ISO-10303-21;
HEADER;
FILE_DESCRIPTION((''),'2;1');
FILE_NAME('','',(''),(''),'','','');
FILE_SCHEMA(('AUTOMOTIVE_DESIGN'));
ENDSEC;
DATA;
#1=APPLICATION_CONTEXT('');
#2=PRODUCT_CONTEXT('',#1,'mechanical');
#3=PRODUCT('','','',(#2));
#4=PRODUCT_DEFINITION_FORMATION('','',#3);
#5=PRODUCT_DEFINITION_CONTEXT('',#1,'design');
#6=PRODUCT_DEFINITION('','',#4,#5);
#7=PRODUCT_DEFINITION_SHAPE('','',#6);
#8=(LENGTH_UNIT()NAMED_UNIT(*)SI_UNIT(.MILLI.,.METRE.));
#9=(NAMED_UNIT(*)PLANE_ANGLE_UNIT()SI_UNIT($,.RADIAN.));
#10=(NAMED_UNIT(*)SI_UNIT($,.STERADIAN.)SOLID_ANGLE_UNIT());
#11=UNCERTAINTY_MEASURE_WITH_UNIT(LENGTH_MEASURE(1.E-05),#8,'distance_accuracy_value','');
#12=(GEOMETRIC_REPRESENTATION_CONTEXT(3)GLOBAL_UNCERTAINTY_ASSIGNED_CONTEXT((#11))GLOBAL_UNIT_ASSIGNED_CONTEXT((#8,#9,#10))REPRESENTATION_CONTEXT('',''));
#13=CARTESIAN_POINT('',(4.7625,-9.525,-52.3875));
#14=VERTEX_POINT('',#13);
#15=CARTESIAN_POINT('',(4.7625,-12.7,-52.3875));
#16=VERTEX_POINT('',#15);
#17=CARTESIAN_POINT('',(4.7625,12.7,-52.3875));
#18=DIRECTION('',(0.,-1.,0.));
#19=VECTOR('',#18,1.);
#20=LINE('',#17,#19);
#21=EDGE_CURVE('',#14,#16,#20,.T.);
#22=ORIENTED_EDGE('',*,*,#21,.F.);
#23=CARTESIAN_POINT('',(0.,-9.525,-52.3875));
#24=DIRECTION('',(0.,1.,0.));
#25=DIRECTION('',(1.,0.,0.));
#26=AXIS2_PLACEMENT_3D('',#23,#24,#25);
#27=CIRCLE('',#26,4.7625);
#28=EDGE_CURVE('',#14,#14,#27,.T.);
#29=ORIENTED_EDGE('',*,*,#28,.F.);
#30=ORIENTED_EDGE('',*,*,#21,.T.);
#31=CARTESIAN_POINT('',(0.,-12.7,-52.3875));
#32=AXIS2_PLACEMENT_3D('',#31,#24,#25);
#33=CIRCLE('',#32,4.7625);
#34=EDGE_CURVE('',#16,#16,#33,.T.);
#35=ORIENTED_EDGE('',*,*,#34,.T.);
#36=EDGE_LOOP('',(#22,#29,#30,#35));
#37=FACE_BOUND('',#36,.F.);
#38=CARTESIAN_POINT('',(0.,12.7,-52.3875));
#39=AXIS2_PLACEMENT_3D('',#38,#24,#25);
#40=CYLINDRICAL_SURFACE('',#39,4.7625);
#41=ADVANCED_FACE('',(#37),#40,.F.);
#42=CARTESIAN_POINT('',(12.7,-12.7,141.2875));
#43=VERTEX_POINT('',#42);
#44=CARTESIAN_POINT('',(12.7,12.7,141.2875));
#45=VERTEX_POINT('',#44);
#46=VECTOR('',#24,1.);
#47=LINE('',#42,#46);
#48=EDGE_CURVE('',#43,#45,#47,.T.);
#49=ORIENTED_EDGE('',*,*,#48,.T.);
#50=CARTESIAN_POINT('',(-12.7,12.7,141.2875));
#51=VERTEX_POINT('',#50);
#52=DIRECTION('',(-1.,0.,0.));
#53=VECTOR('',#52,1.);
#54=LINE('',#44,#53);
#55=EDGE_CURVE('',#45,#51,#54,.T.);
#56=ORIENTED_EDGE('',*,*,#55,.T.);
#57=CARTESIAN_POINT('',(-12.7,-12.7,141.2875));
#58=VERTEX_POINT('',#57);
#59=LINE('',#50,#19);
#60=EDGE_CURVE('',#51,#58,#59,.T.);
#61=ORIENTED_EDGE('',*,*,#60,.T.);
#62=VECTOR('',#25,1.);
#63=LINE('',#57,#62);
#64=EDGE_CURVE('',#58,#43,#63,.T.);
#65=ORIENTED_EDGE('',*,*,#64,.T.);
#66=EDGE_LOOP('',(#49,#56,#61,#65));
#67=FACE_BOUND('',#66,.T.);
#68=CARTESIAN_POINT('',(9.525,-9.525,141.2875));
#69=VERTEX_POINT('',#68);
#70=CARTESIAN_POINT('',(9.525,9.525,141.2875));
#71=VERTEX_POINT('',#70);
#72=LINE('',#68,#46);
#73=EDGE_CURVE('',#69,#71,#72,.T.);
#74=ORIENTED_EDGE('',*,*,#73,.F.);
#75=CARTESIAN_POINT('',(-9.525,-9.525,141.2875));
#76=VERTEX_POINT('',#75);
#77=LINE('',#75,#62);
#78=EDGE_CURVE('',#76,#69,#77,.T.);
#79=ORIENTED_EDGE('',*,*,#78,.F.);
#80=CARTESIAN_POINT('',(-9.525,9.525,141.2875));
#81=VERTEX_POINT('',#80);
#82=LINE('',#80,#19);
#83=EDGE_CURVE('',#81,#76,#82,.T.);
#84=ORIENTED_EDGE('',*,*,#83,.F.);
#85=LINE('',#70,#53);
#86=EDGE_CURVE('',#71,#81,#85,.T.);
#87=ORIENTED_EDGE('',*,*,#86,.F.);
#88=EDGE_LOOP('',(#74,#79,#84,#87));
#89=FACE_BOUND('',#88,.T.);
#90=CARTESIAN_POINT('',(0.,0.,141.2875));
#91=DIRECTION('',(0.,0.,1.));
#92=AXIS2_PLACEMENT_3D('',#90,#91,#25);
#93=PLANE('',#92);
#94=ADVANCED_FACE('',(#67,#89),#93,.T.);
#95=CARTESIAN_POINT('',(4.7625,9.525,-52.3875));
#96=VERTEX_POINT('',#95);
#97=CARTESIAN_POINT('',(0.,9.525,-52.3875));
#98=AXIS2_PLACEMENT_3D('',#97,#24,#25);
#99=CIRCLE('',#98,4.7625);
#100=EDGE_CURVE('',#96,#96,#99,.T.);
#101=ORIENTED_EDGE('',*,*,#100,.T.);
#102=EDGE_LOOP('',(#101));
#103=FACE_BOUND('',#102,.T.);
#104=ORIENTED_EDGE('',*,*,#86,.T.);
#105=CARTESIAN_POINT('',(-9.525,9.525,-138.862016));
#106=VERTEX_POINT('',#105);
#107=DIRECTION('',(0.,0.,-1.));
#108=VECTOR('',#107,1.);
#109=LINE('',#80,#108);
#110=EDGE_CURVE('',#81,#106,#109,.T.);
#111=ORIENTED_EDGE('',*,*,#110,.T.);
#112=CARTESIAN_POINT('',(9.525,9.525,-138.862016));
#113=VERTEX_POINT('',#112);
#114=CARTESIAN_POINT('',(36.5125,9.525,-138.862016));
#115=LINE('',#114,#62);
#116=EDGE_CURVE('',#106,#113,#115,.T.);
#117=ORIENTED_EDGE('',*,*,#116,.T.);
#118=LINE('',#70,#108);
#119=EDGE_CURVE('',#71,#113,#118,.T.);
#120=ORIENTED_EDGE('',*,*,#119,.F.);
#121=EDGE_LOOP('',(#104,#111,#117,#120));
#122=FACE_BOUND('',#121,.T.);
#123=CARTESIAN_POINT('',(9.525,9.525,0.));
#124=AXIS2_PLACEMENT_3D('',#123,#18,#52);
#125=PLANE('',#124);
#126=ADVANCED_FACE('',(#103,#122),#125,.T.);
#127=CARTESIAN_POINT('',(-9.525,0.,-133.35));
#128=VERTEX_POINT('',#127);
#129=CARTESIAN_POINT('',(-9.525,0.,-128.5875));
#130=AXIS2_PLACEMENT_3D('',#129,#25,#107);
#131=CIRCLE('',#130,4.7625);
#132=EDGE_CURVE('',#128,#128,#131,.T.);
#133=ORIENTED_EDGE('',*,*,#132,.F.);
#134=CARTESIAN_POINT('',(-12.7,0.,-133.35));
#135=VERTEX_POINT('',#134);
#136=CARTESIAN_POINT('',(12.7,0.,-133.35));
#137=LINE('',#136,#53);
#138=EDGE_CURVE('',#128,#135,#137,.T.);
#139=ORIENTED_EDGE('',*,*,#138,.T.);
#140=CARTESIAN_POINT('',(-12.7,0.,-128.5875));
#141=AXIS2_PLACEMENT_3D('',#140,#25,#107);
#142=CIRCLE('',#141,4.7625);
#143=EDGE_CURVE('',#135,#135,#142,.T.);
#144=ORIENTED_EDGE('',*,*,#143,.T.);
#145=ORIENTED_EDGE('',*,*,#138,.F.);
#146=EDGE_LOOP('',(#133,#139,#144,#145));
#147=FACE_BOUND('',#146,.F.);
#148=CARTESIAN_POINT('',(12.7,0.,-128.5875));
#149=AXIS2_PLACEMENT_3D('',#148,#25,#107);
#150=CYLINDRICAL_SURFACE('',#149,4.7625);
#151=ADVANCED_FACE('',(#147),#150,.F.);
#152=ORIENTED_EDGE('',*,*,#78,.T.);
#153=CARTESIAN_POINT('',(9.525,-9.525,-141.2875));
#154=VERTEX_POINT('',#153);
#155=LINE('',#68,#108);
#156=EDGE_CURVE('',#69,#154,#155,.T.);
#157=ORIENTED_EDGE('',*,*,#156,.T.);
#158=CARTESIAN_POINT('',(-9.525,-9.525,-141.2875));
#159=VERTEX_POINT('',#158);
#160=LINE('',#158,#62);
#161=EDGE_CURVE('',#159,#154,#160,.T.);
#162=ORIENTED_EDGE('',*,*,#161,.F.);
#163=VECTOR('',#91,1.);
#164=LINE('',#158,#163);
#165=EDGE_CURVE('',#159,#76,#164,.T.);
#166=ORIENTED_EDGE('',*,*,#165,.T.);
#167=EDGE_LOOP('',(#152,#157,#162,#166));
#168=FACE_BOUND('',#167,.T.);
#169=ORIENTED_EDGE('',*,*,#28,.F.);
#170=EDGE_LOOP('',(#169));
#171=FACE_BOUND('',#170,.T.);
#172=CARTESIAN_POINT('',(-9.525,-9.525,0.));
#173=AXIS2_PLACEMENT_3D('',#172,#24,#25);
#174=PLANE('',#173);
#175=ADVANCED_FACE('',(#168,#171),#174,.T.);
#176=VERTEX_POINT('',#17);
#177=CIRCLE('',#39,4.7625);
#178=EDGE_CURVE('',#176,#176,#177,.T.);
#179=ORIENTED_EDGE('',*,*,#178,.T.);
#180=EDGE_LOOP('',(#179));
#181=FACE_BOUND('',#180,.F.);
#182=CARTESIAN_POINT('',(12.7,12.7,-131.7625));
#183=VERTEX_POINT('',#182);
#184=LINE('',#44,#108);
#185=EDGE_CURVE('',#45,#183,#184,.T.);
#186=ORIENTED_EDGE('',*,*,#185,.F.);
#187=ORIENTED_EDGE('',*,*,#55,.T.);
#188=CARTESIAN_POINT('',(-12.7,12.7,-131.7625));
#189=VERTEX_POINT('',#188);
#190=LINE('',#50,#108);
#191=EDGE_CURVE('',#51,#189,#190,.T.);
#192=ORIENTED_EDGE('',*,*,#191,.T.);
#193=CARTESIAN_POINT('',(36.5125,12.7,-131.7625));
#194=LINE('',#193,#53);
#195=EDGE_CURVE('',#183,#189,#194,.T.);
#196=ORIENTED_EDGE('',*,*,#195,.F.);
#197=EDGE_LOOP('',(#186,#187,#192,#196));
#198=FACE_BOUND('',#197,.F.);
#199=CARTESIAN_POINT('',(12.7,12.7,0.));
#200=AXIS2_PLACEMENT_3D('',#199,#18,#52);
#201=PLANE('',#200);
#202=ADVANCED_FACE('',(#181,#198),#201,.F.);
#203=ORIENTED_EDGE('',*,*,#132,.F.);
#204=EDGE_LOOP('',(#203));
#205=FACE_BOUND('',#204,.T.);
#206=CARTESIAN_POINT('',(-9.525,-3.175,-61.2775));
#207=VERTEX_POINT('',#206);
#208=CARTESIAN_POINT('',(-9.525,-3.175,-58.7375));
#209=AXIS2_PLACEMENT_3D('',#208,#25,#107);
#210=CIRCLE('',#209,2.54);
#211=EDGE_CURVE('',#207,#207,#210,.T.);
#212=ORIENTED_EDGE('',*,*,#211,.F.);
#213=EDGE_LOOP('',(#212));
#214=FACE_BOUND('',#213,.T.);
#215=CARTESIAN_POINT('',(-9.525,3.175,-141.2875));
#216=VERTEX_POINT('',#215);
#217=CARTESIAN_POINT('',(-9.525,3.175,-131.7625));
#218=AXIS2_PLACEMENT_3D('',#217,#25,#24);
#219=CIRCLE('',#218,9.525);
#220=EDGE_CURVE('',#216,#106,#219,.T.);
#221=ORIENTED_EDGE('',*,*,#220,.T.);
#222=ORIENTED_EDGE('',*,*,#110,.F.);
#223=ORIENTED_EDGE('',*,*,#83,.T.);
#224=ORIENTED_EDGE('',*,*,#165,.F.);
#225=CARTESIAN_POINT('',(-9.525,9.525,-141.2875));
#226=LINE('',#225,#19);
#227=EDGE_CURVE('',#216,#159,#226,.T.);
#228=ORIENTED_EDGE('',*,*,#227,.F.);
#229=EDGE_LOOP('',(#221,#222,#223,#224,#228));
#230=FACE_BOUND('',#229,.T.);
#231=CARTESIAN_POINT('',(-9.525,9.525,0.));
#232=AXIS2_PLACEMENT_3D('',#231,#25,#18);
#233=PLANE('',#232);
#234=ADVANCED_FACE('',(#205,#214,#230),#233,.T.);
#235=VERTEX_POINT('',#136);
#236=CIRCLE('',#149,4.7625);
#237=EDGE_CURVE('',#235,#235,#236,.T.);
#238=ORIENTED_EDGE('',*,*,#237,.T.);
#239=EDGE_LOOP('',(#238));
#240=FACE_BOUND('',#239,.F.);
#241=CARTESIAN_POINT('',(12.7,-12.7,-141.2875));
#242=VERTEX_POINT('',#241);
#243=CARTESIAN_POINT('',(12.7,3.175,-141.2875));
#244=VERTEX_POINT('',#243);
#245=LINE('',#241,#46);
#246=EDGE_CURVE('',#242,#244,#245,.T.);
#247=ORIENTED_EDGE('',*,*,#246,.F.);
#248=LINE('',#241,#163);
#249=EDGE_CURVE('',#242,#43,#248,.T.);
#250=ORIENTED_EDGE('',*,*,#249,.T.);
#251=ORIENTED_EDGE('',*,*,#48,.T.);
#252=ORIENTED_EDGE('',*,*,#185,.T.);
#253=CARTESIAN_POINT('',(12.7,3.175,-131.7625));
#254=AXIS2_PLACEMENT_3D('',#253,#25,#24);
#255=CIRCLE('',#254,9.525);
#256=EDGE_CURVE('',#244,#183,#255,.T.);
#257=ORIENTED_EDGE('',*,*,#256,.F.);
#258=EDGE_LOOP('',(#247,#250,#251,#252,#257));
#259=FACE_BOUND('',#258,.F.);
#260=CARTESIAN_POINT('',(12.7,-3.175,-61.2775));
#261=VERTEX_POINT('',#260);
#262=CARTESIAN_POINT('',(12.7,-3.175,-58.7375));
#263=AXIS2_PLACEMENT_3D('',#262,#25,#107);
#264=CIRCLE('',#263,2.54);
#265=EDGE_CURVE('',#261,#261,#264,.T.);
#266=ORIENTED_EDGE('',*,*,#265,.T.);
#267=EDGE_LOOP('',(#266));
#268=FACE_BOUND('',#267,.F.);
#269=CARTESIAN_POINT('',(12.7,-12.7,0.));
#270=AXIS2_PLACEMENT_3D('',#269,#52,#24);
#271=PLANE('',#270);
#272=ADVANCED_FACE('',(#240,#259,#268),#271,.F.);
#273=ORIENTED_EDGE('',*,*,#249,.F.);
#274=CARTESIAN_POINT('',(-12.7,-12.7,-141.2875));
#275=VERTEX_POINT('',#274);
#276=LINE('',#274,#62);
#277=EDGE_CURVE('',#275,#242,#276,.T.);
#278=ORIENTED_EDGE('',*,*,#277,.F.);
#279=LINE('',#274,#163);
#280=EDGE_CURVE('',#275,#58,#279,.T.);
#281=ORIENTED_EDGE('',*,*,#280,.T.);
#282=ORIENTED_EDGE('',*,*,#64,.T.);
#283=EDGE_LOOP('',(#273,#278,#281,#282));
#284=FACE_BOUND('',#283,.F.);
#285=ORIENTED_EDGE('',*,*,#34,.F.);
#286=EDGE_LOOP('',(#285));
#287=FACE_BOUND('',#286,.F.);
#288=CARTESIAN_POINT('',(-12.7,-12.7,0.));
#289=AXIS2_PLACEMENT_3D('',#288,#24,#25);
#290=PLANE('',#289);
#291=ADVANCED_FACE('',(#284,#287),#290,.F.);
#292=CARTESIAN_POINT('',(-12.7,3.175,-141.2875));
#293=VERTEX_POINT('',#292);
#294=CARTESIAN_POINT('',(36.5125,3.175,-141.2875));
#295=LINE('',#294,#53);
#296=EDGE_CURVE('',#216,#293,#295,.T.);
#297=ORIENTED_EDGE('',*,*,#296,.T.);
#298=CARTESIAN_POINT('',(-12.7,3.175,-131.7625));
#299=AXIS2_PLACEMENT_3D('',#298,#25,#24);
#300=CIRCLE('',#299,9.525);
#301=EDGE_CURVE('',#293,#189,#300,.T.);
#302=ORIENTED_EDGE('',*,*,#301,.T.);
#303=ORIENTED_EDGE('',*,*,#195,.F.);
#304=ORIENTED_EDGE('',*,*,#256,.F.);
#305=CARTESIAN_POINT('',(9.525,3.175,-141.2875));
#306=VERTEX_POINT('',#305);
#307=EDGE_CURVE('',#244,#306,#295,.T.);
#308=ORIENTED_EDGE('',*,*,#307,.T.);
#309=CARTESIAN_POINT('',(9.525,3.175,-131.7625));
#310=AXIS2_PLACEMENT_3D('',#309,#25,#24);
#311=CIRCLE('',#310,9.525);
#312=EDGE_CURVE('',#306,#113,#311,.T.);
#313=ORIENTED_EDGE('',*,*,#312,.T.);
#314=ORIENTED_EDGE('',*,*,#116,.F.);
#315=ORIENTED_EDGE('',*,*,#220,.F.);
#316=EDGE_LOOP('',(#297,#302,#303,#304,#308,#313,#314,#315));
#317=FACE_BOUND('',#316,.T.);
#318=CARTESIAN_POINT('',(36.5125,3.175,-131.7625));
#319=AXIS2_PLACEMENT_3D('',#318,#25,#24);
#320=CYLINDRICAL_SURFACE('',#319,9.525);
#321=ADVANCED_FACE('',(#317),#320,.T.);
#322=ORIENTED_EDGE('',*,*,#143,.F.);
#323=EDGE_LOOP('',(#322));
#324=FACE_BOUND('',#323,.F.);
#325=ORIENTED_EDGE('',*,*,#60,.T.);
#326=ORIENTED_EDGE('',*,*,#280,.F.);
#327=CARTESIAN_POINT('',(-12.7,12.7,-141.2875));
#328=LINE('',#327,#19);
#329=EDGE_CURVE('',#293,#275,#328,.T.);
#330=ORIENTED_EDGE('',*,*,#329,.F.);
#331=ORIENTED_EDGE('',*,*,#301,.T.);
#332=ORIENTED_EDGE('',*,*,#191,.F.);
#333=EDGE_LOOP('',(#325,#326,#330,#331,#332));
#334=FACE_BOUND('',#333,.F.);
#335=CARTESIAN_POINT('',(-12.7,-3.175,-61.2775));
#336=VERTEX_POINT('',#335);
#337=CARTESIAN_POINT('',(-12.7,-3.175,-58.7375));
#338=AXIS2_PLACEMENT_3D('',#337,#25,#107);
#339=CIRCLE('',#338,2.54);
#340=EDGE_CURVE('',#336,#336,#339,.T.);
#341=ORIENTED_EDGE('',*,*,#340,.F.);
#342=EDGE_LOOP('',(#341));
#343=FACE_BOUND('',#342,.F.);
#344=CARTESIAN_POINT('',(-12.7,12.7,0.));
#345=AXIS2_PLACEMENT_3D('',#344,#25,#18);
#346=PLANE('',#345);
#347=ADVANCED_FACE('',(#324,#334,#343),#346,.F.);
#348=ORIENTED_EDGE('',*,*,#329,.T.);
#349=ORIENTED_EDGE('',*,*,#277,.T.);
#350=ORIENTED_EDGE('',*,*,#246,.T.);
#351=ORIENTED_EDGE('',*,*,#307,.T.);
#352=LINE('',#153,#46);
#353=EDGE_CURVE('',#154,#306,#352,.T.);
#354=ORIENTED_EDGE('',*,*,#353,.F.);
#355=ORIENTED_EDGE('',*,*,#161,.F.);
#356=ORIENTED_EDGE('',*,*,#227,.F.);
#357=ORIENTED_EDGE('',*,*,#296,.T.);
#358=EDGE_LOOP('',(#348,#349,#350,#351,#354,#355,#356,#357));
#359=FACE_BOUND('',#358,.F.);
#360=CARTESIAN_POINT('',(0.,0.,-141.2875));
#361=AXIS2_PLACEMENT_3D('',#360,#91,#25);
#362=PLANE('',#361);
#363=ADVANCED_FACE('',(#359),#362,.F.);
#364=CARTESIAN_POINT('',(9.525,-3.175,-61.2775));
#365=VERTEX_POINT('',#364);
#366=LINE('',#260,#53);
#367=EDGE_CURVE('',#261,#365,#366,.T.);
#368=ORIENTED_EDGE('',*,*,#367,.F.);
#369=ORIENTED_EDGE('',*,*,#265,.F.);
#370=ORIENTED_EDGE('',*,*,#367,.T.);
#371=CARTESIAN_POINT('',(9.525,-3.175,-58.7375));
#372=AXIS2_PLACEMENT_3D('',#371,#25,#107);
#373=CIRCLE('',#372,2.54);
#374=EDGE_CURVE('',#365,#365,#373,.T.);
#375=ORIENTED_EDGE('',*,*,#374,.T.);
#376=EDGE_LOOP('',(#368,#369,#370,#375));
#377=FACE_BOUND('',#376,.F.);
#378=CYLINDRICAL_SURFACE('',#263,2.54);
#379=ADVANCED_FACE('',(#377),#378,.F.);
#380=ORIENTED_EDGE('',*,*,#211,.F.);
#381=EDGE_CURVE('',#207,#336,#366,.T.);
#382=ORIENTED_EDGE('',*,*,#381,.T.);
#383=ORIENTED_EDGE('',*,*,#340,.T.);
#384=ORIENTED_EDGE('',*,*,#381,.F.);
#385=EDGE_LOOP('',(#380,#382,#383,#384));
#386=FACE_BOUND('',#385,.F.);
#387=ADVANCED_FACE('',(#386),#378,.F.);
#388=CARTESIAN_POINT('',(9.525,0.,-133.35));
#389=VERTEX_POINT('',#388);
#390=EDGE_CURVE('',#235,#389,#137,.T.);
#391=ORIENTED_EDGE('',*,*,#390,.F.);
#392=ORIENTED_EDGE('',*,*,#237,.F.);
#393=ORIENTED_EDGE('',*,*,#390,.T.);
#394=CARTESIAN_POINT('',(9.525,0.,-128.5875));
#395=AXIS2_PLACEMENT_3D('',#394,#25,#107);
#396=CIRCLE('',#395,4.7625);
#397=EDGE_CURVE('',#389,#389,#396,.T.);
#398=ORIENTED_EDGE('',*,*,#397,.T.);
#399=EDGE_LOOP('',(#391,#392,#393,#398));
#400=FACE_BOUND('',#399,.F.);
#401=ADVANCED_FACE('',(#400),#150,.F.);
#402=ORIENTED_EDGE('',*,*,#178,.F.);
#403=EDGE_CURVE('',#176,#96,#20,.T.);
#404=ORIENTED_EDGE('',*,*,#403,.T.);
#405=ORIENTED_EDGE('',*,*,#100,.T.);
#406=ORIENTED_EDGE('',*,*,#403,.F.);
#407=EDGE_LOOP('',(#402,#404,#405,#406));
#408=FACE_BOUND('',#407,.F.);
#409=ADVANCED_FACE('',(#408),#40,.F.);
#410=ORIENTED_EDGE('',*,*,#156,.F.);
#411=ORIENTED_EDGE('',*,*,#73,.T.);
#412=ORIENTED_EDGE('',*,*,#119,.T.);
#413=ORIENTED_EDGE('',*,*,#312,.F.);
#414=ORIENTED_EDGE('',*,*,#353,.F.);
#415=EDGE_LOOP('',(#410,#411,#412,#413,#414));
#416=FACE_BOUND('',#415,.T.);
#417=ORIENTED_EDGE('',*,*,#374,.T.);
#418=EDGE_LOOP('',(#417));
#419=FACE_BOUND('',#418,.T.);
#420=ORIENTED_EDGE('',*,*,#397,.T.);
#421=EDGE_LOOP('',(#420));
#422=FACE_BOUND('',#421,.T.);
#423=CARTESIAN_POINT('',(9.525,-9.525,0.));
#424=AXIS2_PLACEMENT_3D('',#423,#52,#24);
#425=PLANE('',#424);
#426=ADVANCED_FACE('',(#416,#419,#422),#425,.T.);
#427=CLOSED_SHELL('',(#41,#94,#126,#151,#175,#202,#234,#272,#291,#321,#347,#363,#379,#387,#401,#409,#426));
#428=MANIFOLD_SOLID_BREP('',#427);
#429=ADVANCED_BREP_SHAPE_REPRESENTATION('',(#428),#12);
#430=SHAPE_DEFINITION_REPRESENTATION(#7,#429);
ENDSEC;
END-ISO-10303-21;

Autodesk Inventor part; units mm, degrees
ref_plane "YZ Plane" through (0, 0, 0) normal (1, 0, 0) x (0, 1, 0)
ref_plane "XZ Plane" through (0, 0, 0) normal (0, 1, 0) x (-1, 0, 0)
ref_plane "XY Plane" through (0, 0, 0) normal (0, 0, 1) x (1, 0, 0)
sketch "Sketch1" plane through (0, 0, 0) normal (0, 0, 1) x (1, 0, 0)
  line L0 (-12.7, -12.7) -> (12.7, -12.7)
  line L1 (12.7, -12.7) -> (12.7, 12.7)
  line L2 (12.7, 12.7) -> (-12.7, 12.7)
  line L3 (-12.7, 12.7) -> (-12.7, -12.7)
  line L4 (-12.7, -12.7) -> (12.7, 12.7) construction
  line L5 (12.7, -12.7) -> (-12.7, 12.7) construction
  line L6 (-9.525, -9.525) -> (9.525, -9.525)
  line L7 (9.525, -9.525) -> (9.525, 9.525)
  line L8 (9.525, 9.525) -> (-9.525, 9.525)
  line L9 (-9.525, 9.525) -> (-9.525, -9.525)
  line L10 (-9.525, -9.525) -> (9.525, 9.525) construction
  line L11 (9.525, -9.525) -> (-9.525, 9.525) construction
  point P0 (0, 0)
  dimension "d0" = 25.4
  dimension "d1" = 3.175
extrude "Extrusion1" add sketch "Sketch1" along normal mid plane 282.575
sketch "Sketch2" plane through (12.7, -12.7, 141.2875) normal (1, 0, 0) x (0, 0, -1)
  line L0 (0, 22.225) -> (0, 3.175) construction
  line L1 (0, 12.7) -> (282.575, 12.7) construction
  line L2 (282.575, 3.175) -> (282.575, 22.225) construction
  circle A0 centre (269.875, 12.7) radius 4.7625
  circle A1 centre (200.025, 9.525) radius 2.54
  point P0 (141.2875, 12.7)
  dimension "d4" = 9.525
  dimension "d5" = 12.7
  dimension "d19" = 5.08
  dimension "d20" = 69.85
  dimension "d21" = 3.175
extrude "Extrusion2" cut sketch "Sketch2" against normal through all
sketch "Sketch3" plane through (-12.7, 12.7, 141.2875) normal (0, 1, 0) x (1, 0, 0)
  line L0 (0, 0) -> (25.4, 0) construction
  line L1 (22.225, 282.575) -> (3.175, 282.575) construction
  line L2 (0, 282.575) -> (0, 0) projected
  line L3 (3.175, 282.575) -> (22.225, 282.575) construction
  line L4 (3.175, 282.575) -> (3.175, 0) construction
  circle A0 centre (12.7, 193.675) radius 4.7625
  line L5 (25.4, 282.575) -> (25.4, 0) projected
  point P0 (12.7, 141.2875)
  dimension "d15" = 3.175
  dimension "d22" = 88.9
  dimension "d23" = 12.7
  dimension "d24" = 9.525
extrude "Extrusion3" cut sketch "Sketch3" against normal through all
fillet "Fillet1" radius 9.525 1 edges at (0, 12.7, -141.2875)
properties part number "pivot arm" material "Aluminum 6061"
